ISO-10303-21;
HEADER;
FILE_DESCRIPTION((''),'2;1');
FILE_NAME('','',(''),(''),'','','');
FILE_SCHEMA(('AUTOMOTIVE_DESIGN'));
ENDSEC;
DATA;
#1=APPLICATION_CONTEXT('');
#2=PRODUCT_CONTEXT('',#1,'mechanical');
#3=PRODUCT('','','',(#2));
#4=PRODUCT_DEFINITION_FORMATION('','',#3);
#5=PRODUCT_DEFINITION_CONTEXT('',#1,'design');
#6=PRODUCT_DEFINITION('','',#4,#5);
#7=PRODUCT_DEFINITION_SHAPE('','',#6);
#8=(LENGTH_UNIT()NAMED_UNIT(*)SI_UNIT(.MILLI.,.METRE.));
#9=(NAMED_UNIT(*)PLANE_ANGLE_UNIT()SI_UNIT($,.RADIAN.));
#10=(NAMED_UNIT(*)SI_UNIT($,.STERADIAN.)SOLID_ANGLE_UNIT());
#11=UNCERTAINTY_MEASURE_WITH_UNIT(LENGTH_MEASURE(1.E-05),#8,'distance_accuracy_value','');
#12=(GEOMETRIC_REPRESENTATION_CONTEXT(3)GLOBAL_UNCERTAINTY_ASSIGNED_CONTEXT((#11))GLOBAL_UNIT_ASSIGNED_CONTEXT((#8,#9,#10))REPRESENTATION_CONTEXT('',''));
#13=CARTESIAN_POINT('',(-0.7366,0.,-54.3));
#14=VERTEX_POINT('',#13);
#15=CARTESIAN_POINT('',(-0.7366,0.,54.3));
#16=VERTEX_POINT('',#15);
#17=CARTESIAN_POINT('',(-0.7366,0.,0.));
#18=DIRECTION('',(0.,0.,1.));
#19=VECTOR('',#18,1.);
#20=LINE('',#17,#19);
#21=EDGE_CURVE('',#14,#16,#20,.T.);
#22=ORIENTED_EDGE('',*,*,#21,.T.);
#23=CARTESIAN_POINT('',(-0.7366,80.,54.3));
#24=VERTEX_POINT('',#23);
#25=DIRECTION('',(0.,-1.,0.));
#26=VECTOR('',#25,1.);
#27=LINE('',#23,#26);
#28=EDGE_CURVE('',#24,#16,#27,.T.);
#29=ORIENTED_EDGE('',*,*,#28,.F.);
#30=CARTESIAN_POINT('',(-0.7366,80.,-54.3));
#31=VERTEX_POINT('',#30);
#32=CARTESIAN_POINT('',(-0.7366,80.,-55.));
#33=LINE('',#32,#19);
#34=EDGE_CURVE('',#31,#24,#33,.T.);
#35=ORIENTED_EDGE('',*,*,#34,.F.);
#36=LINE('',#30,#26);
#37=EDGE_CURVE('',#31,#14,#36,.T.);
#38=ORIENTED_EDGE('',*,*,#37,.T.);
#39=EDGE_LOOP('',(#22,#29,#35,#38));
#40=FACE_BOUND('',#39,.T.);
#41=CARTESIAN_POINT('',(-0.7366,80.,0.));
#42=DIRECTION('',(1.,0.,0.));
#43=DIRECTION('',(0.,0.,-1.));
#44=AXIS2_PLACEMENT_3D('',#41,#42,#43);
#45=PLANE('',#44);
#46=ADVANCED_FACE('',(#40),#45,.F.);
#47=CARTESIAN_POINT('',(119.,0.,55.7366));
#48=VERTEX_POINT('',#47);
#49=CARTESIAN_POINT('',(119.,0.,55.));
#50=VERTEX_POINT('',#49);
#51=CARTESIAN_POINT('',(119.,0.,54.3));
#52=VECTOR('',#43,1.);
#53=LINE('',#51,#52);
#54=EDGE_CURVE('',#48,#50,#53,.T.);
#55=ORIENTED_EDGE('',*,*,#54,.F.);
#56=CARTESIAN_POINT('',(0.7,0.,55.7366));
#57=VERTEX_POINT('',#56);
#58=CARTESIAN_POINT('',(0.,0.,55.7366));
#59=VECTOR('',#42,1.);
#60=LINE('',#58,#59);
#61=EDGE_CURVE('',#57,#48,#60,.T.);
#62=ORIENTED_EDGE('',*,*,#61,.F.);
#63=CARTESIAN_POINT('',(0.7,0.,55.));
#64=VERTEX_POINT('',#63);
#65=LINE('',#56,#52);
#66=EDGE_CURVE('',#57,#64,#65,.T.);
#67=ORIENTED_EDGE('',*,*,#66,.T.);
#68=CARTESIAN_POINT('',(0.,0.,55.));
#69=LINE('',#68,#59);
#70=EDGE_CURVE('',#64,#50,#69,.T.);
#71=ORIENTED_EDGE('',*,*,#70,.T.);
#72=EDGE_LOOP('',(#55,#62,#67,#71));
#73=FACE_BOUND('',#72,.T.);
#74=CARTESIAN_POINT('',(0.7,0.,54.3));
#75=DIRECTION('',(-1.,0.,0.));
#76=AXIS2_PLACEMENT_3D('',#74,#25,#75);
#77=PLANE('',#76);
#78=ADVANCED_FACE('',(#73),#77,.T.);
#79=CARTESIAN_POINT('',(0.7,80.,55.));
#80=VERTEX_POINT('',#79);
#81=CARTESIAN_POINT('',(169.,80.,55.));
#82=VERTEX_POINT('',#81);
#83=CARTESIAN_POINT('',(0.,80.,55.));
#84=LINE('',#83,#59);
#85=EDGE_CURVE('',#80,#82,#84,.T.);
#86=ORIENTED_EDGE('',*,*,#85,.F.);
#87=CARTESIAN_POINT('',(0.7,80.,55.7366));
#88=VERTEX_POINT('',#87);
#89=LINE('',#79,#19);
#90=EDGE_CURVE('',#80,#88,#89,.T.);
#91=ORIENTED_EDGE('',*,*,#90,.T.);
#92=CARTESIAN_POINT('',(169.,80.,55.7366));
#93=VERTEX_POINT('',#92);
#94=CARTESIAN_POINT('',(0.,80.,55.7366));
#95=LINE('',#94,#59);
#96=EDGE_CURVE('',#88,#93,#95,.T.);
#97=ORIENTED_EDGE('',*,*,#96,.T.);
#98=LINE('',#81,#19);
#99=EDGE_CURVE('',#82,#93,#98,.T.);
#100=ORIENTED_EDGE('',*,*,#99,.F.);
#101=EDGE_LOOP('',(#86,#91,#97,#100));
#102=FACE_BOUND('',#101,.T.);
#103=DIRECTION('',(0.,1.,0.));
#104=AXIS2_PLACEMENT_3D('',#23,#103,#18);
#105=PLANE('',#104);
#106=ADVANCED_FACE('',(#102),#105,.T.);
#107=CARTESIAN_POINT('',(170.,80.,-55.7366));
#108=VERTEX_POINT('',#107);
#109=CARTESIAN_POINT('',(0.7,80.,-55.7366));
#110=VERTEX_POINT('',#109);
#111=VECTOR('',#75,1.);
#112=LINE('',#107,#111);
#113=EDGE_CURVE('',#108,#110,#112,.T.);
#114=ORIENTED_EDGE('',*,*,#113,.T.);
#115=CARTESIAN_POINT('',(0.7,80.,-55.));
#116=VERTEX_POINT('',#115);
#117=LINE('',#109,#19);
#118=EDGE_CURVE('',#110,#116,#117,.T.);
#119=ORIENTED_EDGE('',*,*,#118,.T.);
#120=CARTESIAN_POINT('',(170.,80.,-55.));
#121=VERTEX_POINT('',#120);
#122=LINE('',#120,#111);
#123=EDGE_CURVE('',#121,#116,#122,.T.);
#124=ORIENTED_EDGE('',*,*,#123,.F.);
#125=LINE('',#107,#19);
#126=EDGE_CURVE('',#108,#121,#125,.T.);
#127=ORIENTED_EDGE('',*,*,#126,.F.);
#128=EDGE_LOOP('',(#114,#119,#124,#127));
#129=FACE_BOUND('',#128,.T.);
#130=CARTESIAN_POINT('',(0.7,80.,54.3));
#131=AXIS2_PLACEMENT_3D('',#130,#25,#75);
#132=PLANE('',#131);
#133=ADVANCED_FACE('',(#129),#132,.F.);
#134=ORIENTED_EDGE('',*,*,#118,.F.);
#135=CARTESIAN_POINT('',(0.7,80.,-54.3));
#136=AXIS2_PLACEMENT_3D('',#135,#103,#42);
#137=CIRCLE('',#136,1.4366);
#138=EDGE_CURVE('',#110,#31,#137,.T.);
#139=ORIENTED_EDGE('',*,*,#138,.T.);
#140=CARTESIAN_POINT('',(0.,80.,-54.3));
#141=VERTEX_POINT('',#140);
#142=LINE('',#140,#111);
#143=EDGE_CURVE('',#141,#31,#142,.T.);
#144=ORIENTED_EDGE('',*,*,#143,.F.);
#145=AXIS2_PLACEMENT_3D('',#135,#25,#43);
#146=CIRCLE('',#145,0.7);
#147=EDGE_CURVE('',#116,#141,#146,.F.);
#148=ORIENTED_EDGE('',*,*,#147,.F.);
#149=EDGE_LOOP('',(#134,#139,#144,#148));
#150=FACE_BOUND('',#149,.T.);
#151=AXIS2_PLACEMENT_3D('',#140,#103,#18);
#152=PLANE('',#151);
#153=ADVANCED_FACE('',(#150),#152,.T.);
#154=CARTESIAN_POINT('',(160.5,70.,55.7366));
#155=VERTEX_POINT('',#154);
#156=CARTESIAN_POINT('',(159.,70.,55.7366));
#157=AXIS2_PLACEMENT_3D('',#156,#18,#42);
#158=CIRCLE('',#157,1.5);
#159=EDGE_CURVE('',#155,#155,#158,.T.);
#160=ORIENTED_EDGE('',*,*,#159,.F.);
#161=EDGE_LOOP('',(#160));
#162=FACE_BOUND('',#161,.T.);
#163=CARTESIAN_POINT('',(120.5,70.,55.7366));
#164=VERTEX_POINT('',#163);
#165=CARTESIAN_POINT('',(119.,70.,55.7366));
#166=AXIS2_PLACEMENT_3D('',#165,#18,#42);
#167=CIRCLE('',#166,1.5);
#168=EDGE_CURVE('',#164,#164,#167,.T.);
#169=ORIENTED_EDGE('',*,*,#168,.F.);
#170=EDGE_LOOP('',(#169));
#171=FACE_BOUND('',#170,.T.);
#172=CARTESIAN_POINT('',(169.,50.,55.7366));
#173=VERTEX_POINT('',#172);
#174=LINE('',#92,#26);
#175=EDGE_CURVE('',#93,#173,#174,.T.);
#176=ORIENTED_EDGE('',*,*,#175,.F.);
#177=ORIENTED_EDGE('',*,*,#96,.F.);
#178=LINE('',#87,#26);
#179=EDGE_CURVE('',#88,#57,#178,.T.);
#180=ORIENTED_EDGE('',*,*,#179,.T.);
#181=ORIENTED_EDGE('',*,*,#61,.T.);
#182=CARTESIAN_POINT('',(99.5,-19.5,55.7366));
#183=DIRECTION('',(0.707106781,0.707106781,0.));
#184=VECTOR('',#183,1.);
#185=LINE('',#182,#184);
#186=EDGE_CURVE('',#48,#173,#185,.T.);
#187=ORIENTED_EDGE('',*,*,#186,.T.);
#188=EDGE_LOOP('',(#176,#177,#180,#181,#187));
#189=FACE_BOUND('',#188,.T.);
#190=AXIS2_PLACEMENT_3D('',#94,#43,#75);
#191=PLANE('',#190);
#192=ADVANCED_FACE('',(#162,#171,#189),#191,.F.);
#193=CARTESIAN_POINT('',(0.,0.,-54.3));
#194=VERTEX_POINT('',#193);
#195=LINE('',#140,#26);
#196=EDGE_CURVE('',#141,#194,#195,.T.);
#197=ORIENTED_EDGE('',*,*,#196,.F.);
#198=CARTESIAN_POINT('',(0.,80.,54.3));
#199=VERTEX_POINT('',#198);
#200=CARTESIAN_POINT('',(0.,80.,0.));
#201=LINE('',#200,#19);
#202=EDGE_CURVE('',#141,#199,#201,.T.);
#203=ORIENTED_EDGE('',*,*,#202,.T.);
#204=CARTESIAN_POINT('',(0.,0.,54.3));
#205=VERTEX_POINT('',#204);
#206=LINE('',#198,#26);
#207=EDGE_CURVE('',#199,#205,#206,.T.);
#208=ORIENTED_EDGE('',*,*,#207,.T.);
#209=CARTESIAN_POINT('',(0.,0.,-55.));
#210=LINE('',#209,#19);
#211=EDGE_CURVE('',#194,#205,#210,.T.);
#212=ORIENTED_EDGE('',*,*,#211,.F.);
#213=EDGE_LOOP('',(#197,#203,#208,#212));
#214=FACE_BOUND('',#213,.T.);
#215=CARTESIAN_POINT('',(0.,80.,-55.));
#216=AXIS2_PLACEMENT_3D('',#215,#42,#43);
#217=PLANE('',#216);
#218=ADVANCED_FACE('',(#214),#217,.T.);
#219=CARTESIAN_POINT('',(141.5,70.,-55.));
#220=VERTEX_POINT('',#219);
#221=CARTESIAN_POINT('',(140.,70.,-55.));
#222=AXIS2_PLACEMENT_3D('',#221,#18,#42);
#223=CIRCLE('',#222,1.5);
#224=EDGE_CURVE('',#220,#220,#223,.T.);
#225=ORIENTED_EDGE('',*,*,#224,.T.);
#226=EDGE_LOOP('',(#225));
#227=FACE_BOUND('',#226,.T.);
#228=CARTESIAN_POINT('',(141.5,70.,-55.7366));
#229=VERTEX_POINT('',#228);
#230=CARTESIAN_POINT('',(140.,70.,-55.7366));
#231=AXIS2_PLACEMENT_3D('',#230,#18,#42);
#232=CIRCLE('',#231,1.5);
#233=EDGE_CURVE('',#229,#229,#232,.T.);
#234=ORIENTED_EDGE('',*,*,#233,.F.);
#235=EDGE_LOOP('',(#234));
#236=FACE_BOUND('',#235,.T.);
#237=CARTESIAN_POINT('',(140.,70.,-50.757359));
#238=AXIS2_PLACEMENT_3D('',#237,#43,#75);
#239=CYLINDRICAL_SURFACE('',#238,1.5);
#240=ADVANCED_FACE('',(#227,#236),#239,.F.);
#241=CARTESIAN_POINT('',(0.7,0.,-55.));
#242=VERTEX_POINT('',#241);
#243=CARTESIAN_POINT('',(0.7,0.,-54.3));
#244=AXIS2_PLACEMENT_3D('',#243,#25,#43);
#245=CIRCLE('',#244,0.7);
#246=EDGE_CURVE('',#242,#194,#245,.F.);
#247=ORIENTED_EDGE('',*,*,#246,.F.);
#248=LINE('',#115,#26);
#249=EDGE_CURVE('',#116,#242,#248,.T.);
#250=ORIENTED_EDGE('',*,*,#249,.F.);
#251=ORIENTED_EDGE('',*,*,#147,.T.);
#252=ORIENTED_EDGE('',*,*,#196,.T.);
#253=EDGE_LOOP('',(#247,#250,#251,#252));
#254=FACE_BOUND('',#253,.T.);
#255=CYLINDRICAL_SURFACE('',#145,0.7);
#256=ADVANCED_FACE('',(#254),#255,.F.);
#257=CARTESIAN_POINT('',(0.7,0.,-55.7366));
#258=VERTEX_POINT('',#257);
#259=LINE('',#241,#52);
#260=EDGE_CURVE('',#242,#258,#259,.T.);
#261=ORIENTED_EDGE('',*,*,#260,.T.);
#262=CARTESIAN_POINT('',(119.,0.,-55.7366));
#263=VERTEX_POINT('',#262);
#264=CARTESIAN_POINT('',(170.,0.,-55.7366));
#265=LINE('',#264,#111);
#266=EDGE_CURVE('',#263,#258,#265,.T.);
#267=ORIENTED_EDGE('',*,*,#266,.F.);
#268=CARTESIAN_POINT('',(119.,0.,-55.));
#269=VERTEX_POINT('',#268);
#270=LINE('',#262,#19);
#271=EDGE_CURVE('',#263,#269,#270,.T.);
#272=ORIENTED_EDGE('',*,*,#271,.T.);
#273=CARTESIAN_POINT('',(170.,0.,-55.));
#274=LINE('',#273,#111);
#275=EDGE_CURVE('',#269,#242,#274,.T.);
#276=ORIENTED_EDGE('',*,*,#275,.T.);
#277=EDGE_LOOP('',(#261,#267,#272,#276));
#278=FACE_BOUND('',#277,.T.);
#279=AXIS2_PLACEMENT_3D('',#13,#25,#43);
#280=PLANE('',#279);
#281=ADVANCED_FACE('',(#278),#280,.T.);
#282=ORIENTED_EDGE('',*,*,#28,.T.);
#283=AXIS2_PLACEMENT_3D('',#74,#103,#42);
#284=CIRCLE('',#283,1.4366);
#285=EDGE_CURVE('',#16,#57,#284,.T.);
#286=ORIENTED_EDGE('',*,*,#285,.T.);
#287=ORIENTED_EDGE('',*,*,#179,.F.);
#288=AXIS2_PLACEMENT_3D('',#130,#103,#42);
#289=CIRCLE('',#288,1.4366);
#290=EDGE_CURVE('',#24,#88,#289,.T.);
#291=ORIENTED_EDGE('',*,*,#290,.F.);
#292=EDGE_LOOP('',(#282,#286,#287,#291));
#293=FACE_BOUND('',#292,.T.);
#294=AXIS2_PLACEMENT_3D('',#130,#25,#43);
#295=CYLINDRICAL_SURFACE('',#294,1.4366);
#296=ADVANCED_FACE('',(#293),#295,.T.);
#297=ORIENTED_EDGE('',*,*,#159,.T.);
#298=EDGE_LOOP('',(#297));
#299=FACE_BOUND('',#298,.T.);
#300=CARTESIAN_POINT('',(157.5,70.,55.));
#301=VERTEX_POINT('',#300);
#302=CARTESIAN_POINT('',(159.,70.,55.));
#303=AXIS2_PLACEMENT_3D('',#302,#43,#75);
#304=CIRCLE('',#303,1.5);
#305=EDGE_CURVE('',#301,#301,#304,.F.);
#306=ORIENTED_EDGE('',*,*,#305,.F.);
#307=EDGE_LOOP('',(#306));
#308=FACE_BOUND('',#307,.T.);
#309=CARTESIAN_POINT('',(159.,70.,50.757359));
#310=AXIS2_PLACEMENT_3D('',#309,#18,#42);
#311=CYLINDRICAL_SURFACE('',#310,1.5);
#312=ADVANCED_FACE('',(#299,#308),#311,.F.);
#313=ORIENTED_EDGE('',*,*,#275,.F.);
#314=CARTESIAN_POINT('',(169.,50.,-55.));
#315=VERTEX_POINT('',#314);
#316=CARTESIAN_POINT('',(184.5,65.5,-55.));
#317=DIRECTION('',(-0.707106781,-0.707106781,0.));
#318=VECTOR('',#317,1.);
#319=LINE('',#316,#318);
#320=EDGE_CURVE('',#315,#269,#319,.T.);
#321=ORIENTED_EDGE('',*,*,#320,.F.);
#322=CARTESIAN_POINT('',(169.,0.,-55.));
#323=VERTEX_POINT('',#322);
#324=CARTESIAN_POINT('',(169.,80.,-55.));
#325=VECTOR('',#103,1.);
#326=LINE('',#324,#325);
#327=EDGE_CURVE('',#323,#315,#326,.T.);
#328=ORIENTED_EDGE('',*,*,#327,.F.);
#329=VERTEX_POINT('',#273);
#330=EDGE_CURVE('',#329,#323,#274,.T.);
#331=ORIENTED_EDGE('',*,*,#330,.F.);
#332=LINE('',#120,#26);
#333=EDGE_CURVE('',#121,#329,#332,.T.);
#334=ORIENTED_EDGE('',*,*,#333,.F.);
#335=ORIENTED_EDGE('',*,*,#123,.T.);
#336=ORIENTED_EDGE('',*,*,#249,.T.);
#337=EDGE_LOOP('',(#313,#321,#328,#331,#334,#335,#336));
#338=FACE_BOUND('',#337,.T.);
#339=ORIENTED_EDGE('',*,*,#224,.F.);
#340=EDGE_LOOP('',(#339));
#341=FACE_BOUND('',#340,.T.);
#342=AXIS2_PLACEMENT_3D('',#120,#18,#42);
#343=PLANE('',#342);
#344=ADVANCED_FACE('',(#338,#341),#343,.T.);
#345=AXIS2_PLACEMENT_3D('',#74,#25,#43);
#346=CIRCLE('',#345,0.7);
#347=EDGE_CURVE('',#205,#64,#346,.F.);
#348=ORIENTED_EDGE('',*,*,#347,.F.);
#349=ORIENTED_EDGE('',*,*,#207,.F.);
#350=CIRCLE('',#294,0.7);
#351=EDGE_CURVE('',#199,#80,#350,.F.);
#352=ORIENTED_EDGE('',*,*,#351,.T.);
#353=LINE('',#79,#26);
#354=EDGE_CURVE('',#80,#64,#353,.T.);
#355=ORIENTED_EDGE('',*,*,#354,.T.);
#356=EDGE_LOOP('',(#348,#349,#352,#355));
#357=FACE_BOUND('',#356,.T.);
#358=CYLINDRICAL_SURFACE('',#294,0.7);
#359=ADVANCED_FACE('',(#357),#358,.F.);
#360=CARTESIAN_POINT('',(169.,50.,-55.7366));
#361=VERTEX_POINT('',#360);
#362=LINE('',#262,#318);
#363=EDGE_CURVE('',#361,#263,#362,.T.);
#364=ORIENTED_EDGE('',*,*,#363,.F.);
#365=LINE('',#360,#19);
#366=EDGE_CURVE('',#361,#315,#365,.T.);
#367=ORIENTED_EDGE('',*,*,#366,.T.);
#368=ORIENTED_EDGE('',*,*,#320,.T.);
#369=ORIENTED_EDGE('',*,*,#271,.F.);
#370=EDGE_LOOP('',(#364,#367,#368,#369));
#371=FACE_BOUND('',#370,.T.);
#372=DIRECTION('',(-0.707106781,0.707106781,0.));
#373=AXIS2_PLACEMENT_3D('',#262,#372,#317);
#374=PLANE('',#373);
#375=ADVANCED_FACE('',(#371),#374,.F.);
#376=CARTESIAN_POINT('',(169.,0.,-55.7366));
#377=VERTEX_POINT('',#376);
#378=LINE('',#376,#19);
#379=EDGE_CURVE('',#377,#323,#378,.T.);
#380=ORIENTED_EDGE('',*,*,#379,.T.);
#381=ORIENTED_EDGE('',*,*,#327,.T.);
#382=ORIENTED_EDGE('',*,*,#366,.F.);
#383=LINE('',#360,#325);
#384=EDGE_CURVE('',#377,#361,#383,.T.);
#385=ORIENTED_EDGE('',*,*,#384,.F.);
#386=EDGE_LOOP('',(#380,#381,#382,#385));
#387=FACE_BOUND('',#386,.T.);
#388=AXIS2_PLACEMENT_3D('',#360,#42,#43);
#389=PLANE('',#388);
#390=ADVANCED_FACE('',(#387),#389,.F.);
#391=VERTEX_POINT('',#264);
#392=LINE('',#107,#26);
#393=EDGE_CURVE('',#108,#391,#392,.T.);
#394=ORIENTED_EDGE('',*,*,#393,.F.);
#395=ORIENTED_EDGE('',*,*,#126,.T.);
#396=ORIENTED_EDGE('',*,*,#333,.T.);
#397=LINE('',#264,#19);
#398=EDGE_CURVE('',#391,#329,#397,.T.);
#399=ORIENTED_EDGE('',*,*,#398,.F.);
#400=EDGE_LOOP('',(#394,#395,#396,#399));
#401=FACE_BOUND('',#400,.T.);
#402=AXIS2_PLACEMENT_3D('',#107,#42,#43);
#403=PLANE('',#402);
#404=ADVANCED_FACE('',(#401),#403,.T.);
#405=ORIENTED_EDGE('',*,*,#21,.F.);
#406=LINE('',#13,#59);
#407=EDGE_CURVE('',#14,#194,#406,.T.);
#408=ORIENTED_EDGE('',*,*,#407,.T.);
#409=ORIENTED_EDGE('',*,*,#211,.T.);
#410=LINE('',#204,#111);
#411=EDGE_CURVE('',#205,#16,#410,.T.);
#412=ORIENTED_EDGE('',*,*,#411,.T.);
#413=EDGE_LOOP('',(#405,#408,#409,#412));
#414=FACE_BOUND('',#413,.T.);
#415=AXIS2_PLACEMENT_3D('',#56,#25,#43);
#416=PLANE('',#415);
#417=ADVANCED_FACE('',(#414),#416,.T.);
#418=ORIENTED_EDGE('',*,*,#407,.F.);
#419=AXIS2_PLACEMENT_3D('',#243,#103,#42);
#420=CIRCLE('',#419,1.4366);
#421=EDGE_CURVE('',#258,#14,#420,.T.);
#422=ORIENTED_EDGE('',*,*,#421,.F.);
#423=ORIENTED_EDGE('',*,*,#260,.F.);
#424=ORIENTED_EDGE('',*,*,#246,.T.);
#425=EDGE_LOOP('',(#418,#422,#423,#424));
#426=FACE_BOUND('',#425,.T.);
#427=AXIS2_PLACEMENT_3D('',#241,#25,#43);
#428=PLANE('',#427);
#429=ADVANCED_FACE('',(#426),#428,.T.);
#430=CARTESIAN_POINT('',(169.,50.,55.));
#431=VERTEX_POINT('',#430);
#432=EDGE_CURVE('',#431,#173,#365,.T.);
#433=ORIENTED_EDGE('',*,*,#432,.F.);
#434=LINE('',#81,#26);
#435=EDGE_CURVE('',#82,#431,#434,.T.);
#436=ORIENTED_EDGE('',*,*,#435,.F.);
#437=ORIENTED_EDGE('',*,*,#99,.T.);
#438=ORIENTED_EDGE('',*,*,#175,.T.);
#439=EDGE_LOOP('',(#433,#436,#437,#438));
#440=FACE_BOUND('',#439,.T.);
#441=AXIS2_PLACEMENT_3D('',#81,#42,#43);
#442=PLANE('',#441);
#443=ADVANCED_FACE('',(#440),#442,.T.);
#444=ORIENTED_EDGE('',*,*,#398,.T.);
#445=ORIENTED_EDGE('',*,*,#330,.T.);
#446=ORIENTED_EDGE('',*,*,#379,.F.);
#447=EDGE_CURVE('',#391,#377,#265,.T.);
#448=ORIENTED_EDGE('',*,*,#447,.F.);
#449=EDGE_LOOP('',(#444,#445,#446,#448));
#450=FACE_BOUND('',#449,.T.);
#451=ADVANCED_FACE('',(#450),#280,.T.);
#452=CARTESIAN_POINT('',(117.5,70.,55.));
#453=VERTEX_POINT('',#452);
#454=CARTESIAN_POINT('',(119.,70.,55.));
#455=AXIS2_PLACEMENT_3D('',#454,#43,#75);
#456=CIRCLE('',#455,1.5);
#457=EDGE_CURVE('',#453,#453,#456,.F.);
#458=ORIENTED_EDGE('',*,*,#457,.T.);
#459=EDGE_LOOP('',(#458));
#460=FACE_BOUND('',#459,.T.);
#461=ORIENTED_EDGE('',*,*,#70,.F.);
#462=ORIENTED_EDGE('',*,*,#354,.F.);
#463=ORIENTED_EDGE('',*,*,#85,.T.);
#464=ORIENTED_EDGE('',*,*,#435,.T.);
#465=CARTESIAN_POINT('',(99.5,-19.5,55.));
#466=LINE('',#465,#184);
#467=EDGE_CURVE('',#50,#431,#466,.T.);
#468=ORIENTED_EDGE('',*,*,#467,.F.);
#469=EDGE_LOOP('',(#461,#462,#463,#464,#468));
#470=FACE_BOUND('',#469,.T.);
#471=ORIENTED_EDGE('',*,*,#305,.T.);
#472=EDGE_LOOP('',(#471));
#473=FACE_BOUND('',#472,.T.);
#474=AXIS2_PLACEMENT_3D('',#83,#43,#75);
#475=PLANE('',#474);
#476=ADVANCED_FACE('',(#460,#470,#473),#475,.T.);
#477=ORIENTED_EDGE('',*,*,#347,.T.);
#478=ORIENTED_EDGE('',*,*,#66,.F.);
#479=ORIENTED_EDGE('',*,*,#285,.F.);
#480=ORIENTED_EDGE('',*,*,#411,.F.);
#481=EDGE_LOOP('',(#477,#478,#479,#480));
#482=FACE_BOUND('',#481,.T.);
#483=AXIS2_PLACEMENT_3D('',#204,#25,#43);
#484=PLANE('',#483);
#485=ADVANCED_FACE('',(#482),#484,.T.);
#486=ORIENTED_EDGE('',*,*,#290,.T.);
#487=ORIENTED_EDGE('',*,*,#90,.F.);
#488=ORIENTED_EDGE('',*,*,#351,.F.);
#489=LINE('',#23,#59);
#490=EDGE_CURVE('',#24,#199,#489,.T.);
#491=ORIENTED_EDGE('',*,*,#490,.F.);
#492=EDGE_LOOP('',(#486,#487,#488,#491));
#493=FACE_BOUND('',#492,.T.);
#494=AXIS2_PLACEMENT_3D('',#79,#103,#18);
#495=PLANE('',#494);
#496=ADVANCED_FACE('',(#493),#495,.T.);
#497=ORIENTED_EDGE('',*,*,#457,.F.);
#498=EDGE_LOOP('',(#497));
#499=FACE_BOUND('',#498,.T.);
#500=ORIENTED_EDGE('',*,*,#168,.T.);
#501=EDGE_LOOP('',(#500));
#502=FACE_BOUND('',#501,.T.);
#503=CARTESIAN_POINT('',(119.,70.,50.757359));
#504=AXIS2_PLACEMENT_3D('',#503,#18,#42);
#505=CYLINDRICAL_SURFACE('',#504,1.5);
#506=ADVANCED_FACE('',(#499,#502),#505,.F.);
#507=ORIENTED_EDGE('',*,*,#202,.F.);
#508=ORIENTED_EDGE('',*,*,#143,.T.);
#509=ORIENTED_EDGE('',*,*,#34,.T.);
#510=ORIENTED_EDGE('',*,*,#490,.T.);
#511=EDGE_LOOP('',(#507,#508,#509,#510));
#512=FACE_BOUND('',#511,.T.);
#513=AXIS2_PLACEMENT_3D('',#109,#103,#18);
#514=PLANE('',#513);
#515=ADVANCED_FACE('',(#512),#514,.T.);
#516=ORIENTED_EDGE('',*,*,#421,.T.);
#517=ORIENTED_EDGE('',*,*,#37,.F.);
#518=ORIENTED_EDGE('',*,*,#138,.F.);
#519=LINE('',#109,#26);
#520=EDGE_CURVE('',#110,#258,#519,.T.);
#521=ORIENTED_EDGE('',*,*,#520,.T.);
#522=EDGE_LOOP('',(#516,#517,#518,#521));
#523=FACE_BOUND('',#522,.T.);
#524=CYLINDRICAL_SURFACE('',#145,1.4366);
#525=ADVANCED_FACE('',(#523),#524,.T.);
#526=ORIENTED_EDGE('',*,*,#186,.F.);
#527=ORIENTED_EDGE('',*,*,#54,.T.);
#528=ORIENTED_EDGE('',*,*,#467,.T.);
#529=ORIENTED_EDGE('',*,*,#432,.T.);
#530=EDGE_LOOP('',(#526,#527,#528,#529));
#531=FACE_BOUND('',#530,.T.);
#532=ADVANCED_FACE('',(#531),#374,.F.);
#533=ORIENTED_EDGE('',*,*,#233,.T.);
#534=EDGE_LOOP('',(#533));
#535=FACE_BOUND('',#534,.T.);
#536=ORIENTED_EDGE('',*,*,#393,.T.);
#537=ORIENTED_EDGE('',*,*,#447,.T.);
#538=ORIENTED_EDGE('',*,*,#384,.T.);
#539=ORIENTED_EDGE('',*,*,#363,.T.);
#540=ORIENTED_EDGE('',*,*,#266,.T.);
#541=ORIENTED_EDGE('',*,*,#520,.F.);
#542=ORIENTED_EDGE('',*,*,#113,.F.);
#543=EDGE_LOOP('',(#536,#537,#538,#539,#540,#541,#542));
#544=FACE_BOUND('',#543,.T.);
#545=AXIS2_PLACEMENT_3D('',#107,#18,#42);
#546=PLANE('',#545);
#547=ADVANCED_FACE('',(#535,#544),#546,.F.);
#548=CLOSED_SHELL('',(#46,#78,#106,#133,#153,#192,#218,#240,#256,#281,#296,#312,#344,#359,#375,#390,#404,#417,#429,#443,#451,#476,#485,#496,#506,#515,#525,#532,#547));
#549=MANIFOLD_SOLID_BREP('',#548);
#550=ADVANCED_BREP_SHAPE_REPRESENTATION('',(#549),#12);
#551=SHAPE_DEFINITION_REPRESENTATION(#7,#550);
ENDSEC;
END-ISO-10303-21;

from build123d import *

# Parameters (mm, degrees)
BASE_FLANGE1_DEPTH      = 80
CUT_EXTRUDE1_DEPTH      = 219.463439317
CUT_EXTRUDE1_DEPTH_BACK = 219.463439317
SKETCH7_R               = 1.5
CUT_EXTRUDE3_DEPTH      = 0.7366
SKETCH8_R               = 1.5
CUT_EXTRUDE4_DEPTH      = 0.7366


# Sheet-metal steps are written as plain solids
with BuildPart() as part:
    # Sketch1 → Base-Flange1 (new body)
    with BuildSketch(Plane(origin=(0, 0, 0), x_dir=(1, 0, 0), z_dir=(0, 1, 0))):
        with BuildLine():
            Line((170, 55), (0.7, 55))
            ThreePointArc((0.7, 55), (0.205025253, 54.794974747), (0, 54.3))
            Line((0, 54.3), (0, 0))
            Line((0, 0), (0, -54.3))
            ThreePointArc((0, -54.3), (0.205025253, -54.794974747), (0.7, -55))
            Line((0.7, -55), (169, -55))
            Line((169, -55), (169, -55.7366))
            Line((169, -55.7366), (0.7, -55.7366))
            ThreePointArc((0.7, -55.7366), (-0.315829602, -55.315829602), (-0.7366, -54.3))
            Line((-0.7366, -54.3), (-0.7366, 0))
            Line((-0.7366, 0), (-0.7366, 54.3))
            ThreePointArc((-0.7366, 54.3), (-0.315829602, 55.315829602), (0.7, 55.7366))
            Line((0.7, 55.7366), (170, 55.7366))
            Line((170, 55.7366), (170, 55))
        make_face()
    extrude(amount=BASE_FLANGE1_DEPTH)

    # Sketch6 → Cut-Extrude1 (cut, two sides: drawn at the far end of the back side and taken through both)
    with BuildSketch(Plane.XY.offset(55.7366).offset(-CUT_EXTRUDE1_DEPTH_BACK)):
        Polygon((169, 50), (169, 0), (119, 0), align=None)
    extrude(amount=CUT_EXTRUDE1_DEPTH + CUT_EXTRUDE1_DEPTH_BACK, mode=Mode.SUBTRACT)

    # Sketch7 → Cut-Extrude3 (cut)
    with BuildSketch(Plane.XY.offset(55.7366)):
        with Locations((159, 70)):
            Circle(SKETCH7_R)
        with Locations((119, 70)):
            Circle(SKETCH7_R)
    extrude(amount=-CUT_EXTRUDE3_DEPTH, mode=Mode.SUBTRACT)

    # Sketch8 → Cut-Extrude4 (cut)
    with BuildSketch(Plane.XY.offset(-55.7366)):
        with Locations((140, 70)):
            Circle(SKETCH8_R)
    extrude(amount=CUT_EXTRUDE4_DEPTH, mode=Mode.SUBTRACT)


solid = part.part
